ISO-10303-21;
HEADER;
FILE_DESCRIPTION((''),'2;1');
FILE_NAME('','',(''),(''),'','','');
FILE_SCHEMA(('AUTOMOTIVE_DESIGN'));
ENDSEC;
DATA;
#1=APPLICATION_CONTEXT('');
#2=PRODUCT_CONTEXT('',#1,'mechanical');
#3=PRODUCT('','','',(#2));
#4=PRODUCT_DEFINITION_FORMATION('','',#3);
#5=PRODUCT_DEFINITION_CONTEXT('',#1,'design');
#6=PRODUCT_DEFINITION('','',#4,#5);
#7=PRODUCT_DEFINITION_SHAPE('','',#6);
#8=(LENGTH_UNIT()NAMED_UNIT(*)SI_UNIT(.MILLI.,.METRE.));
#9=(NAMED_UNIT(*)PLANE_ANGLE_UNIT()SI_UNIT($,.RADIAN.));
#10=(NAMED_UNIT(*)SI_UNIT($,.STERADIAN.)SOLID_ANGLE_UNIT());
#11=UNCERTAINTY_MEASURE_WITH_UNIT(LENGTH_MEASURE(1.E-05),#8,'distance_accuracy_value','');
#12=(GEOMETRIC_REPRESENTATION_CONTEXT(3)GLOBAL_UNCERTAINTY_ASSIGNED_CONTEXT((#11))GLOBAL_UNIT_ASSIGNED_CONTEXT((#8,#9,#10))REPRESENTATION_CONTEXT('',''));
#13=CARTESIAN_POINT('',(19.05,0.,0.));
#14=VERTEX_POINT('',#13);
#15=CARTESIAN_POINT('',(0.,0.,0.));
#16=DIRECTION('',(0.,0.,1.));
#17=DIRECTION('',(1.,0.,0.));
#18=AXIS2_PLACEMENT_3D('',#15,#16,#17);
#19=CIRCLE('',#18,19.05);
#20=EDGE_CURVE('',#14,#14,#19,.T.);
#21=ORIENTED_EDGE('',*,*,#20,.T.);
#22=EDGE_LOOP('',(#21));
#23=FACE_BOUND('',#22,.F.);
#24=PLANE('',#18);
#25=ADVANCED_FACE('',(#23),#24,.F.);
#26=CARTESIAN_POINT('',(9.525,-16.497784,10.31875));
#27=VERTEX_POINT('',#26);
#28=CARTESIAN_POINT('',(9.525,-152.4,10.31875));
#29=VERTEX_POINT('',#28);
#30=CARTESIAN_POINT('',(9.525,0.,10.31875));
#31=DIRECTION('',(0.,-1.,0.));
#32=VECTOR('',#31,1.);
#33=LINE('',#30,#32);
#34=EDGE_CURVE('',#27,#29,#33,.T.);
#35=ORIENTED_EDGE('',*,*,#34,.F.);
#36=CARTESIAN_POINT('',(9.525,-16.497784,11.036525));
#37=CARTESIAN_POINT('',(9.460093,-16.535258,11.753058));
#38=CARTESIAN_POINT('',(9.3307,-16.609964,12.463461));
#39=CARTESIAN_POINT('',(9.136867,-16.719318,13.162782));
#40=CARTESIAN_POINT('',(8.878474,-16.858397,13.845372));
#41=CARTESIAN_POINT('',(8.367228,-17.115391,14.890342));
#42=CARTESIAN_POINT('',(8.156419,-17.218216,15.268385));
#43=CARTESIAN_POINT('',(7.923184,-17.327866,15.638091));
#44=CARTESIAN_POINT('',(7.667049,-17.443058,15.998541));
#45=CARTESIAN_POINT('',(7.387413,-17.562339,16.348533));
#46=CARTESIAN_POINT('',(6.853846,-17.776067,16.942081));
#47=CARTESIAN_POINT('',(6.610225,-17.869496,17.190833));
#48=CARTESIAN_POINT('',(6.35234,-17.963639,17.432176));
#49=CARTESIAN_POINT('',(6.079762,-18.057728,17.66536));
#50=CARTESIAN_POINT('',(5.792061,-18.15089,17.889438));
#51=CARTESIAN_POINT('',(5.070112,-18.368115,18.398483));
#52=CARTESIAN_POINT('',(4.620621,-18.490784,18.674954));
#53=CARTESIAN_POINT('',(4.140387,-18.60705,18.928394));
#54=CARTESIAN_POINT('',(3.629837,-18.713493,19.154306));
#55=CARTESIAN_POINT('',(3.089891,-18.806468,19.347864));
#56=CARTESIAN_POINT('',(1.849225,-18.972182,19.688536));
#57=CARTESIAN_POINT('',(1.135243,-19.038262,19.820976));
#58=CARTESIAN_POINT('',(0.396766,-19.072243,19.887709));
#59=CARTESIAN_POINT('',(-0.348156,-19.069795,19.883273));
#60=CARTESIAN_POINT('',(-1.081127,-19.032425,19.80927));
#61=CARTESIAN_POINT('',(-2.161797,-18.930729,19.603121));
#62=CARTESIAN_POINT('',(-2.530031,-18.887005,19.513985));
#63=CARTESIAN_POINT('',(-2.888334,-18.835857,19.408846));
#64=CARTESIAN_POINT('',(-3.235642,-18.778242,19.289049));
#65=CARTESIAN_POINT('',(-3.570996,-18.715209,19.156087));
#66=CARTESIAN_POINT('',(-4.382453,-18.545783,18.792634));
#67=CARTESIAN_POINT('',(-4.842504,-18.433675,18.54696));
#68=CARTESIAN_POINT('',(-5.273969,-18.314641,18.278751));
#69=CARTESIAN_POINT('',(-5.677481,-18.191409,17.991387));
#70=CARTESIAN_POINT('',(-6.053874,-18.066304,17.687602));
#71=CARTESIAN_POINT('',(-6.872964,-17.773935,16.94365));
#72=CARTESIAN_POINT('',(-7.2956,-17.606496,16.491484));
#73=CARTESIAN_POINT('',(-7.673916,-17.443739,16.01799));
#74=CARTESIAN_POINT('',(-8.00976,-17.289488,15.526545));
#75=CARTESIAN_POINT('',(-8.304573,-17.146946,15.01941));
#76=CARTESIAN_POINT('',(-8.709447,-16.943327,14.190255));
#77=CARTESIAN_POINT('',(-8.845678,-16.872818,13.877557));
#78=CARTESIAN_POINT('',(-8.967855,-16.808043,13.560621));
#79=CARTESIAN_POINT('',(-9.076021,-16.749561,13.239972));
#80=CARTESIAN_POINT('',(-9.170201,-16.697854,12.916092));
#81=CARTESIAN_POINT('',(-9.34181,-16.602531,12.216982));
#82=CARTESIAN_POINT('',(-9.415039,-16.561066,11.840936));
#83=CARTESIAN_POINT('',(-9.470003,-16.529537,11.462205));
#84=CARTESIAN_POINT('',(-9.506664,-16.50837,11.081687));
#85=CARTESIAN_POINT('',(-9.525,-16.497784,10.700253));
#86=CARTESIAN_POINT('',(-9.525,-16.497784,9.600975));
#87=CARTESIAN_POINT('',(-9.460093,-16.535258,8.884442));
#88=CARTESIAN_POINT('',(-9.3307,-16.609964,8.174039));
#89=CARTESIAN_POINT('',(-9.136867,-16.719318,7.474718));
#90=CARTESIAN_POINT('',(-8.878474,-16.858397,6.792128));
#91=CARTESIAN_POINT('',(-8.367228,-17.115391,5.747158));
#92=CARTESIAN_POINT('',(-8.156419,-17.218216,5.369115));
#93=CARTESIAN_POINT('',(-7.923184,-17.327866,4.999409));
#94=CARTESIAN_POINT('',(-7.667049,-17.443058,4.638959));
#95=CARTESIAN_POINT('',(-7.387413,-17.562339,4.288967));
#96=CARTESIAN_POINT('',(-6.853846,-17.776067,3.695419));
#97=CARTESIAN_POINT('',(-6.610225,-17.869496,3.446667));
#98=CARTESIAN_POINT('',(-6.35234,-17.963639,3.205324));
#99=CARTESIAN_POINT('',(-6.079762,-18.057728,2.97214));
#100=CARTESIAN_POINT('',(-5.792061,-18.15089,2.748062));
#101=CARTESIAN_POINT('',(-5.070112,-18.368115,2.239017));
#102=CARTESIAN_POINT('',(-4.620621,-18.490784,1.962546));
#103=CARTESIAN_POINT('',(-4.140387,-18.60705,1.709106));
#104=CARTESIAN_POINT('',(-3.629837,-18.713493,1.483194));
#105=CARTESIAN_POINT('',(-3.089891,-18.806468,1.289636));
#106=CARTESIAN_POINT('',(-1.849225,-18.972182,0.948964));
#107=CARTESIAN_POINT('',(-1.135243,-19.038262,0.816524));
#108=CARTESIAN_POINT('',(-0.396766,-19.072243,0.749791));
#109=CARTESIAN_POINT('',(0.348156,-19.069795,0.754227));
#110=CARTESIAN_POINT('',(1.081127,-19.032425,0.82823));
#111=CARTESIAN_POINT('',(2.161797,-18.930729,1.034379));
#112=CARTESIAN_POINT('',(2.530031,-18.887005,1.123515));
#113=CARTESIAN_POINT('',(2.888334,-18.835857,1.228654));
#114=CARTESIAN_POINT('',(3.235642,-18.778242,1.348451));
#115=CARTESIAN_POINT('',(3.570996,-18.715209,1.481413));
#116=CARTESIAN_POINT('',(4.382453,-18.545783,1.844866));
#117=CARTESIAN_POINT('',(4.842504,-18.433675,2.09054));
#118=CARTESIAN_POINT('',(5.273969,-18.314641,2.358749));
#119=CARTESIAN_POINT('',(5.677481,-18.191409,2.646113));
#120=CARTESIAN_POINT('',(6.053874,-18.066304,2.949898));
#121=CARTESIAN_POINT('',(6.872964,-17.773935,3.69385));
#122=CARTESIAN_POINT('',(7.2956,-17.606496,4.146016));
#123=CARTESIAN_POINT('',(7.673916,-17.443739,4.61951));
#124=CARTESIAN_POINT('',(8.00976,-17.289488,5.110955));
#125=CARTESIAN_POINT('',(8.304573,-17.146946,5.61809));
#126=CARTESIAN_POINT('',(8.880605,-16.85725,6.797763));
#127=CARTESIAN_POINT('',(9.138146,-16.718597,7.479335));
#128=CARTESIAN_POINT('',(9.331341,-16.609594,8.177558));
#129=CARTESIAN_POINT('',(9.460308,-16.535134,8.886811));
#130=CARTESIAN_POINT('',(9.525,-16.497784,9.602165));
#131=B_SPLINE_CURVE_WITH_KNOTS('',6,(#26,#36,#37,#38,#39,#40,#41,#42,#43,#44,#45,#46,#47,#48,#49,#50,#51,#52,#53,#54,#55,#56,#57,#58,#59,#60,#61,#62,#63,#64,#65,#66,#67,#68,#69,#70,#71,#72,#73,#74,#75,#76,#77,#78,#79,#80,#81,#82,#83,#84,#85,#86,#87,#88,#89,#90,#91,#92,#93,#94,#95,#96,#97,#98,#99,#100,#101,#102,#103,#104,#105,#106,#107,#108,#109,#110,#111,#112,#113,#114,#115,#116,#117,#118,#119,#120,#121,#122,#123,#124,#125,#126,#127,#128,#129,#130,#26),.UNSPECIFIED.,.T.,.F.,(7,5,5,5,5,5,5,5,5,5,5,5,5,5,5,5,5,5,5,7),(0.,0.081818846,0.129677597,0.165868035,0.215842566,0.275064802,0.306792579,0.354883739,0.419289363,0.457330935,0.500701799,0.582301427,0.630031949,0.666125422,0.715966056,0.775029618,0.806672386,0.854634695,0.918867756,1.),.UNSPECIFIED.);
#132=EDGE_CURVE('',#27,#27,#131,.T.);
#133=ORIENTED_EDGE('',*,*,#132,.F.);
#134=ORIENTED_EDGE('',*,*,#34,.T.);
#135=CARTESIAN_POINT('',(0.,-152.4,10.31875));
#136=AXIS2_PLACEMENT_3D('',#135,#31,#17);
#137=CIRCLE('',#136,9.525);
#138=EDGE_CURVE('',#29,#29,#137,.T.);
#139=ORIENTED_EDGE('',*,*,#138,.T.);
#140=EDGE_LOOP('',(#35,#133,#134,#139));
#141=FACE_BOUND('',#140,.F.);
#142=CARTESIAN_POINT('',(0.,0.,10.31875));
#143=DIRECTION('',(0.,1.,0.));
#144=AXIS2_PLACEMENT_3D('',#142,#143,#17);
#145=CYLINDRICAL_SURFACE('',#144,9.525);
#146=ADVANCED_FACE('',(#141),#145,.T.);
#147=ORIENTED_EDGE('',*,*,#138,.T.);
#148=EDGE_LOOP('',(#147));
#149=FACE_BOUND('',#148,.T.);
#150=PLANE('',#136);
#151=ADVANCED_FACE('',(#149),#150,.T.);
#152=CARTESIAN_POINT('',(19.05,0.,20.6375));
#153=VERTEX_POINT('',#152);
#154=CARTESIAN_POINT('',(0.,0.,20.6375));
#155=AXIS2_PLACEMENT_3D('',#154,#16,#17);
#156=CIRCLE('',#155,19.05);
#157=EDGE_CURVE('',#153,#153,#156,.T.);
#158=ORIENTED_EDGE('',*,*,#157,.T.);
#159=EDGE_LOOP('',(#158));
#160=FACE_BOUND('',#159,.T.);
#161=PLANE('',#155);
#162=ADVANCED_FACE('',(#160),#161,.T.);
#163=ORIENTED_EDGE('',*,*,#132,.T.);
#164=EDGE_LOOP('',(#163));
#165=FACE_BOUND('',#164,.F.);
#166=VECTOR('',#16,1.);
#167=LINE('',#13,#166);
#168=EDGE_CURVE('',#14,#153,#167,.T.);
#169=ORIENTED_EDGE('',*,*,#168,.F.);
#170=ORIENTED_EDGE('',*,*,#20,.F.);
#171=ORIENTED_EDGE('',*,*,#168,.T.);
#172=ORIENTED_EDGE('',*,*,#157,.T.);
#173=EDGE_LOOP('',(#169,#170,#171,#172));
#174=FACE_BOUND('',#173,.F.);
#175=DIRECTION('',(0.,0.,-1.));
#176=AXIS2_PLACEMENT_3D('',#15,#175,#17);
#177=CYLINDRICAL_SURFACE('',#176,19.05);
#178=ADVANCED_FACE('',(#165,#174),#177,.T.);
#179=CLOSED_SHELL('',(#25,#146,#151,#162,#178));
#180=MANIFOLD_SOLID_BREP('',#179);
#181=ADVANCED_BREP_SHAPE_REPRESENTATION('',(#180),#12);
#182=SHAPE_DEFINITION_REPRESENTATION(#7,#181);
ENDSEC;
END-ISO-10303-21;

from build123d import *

# Parameters (mm, degrees)
F0_R     = 19.05
F1_DEPTH = 20.6375
F2_R     = 9.525
F3_DEPTH = 152.4


# Not quite as in the source:
# - a length typed as a fraction of an inch, garbled in the dataset ("3 / 203.2 mm" for 3/8 in), is restored


with BuildPart() as f1:
    # F0 (on Top) → F1 (new body)
    with BuildSketch(Plane.XY):
        Circle(F0_R)
    extrude(amount=F1_DEPTH)

    # F2 (on Front) → F3 (join)
    with BuildSketch(Plane.XZ):
        with Locations((0, 10.31875)):
            Circle(F2_R)
    extrude(amount=F3_DEPTH)


solid = f1.part
